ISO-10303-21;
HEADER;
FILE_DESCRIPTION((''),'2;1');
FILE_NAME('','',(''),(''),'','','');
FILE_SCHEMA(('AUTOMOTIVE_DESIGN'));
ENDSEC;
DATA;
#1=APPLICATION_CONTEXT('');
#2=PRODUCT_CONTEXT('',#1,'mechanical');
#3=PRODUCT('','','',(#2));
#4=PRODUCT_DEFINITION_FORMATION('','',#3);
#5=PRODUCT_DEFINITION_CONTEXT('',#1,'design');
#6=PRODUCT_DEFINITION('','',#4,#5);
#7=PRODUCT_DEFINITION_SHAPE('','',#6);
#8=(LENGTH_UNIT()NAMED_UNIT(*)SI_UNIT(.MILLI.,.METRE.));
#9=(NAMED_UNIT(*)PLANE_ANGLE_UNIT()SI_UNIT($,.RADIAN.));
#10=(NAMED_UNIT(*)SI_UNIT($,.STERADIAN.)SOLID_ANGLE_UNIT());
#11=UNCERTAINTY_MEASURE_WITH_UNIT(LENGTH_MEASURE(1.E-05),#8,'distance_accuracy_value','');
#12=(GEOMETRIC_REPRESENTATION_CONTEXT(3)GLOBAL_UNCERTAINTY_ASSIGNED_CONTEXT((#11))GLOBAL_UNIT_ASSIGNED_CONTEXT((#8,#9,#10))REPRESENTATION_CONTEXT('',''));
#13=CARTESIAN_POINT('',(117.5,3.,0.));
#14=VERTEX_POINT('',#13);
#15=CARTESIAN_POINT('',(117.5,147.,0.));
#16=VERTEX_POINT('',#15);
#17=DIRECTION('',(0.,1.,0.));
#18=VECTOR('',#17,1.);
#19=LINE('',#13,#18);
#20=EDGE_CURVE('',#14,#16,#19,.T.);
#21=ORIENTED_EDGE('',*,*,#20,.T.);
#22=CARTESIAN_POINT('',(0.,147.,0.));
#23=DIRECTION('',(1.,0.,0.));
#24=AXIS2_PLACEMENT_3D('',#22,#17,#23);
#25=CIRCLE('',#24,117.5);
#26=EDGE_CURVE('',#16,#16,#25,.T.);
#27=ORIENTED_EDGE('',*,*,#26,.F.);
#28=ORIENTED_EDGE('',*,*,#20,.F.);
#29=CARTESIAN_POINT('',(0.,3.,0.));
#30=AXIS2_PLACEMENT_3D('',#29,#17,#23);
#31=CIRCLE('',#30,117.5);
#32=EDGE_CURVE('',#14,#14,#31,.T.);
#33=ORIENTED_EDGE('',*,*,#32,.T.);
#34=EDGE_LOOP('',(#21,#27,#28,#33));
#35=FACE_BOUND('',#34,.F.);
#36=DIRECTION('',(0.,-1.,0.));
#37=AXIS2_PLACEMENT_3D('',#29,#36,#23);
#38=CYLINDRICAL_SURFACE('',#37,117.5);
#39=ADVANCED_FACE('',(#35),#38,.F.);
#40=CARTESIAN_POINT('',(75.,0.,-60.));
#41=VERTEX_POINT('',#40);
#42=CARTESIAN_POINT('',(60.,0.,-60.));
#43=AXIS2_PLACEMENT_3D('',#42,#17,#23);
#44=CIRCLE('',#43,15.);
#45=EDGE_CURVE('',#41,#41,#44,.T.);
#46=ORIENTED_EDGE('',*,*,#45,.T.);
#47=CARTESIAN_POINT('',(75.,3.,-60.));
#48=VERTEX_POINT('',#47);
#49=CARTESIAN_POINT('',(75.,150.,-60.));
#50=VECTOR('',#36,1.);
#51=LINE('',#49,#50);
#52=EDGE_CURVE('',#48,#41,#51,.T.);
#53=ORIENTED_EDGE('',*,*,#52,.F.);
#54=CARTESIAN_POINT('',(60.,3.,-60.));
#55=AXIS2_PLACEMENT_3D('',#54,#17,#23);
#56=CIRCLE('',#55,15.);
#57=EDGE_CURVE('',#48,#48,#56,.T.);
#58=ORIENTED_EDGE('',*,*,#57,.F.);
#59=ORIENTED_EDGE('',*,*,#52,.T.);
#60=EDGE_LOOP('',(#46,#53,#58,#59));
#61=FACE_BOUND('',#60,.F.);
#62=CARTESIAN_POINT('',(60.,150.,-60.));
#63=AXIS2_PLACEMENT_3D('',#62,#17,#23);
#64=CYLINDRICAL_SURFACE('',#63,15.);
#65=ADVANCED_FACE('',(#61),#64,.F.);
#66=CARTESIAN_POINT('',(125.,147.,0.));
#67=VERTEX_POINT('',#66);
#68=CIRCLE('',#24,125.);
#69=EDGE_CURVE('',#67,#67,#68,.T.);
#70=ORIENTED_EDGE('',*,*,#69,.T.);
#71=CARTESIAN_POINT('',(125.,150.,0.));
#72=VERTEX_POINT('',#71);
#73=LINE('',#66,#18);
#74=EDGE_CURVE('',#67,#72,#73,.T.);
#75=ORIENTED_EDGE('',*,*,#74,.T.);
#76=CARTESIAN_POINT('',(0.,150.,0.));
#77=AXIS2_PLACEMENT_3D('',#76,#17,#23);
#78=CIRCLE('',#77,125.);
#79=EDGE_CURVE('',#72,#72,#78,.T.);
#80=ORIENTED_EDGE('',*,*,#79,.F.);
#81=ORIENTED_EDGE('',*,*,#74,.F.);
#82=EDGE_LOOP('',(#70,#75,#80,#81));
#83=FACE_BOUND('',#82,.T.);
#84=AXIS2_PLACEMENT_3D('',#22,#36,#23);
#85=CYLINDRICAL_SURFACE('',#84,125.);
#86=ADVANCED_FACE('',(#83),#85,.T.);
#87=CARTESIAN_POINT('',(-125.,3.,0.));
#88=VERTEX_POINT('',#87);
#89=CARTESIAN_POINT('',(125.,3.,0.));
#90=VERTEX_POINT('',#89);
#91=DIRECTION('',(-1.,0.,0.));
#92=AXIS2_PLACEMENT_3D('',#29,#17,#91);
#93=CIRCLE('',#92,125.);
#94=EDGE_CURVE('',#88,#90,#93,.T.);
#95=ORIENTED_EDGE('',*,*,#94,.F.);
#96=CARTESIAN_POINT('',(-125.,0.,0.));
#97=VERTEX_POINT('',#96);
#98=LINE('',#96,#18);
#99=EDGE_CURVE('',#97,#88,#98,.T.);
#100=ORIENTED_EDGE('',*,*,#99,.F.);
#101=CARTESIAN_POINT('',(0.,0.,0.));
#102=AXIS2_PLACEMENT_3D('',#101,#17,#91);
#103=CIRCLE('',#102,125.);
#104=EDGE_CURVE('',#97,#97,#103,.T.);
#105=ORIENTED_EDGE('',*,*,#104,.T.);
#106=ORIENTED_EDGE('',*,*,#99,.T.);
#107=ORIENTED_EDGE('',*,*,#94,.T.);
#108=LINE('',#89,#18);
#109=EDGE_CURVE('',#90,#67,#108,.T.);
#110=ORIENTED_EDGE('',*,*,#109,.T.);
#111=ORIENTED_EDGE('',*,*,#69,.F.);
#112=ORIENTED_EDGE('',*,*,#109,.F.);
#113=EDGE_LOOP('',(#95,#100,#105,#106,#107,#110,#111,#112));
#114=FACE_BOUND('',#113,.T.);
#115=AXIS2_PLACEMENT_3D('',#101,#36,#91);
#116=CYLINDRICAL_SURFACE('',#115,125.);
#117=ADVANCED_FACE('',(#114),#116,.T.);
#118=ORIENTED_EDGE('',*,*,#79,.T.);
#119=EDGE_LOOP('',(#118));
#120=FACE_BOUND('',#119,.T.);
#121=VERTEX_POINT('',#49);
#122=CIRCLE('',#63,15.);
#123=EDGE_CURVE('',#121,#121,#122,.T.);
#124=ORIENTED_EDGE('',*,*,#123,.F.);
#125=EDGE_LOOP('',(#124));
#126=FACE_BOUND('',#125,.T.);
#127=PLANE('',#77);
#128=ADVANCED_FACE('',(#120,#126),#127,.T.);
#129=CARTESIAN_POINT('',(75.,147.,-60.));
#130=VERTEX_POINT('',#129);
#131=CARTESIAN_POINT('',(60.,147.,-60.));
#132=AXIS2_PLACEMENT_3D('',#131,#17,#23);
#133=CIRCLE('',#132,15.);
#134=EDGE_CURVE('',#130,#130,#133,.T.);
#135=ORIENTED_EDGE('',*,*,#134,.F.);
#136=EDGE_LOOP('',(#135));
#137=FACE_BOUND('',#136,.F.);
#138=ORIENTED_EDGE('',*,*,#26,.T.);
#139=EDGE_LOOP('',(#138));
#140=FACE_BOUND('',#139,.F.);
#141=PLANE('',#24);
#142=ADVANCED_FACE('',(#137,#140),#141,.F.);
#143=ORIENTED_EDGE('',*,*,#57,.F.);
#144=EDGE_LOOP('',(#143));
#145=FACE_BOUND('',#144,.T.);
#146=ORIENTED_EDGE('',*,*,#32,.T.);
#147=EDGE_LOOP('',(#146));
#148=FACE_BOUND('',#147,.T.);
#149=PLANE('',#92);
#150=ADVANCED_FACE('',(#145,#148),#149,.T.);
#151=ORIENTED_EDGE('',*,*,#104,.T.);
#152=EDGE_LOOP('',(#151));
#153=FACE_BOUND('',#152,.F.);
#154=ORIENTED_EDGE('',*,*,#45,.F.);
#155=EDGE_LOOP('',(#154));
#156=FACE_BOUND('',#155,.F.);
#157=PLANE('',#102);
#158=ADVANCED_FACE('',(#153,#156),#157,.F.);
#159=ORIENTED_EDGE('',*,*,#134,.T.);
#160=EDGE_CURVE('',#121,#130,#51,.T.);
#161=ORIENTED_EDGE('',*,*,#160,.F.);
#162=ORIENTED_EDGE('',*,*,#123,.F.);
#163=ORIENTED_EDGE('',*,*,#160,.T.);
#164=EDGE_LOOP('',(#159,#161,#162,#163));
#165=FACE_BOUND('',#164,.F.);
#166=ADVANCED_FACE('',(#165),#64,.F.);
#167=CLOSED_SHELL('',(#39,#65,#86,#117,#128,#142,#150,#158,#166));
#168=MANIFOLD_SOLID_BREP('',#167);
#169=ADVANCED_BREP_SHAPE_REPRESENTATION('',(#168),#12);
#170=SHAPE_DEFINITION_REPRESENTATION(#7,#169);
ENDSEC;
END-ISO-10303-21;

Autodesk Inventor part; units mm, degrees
ref_plane "YZ Plane" through (0, 0, 0) normal (1, 0, 0) x (0, 1, 0)
ref_plane "XZ Plane" through (0, 0, 0) normal (0, 1, 0) x (-1, 0, 0)
ref_plane "XY Plane" through (0, 0, 0) normal (0, 0, 1) x (1, 0, 0)
sketch "スケッチ1" plane through (0, 0, 0) normal (0, 1, 0) x (-1, 0, 0)
  circle A0 centre (0, 0) radius 125
  dimension "d0" = 250
extrude "押し出し1" add sketch "スケッチ1" along normal blind 3
sketch "スケッチ2" plane through (0, 3, 0) normal (0, 1, 0) x (1, 0, 0)
  circle A0 centre (0, 0) radius 125
  circle A1 centre (0, 0) radius 117.5
  dimension "d3" = 250
  dimension "d4" = 235
extrude "押し出し2" add sketch "スケッチ2" along normal blind 144
sketch "スケッチ3" plane through (0, 147, 0) normal (0, 1, 0) x (1, 0, 0)
  circle A0 centre (0, 0) radius 125
extrude "押し出し3" add sketch "スケッチ3" along normal blind 3
sketch "スケッチ4" plane through (0, 150, 0) normal (0, 1, 0) x (1, 0, 0)
  circle A0 centre (60, 60) radius 15
  point P0 (0, 0)
  dimension "d9" = 30
  dimension "d10" = 60
  dimension "d11" = 60
extrude "押し出し4" cut sketch "スケッチ4" against normal through all
properties part number "dummy1"
